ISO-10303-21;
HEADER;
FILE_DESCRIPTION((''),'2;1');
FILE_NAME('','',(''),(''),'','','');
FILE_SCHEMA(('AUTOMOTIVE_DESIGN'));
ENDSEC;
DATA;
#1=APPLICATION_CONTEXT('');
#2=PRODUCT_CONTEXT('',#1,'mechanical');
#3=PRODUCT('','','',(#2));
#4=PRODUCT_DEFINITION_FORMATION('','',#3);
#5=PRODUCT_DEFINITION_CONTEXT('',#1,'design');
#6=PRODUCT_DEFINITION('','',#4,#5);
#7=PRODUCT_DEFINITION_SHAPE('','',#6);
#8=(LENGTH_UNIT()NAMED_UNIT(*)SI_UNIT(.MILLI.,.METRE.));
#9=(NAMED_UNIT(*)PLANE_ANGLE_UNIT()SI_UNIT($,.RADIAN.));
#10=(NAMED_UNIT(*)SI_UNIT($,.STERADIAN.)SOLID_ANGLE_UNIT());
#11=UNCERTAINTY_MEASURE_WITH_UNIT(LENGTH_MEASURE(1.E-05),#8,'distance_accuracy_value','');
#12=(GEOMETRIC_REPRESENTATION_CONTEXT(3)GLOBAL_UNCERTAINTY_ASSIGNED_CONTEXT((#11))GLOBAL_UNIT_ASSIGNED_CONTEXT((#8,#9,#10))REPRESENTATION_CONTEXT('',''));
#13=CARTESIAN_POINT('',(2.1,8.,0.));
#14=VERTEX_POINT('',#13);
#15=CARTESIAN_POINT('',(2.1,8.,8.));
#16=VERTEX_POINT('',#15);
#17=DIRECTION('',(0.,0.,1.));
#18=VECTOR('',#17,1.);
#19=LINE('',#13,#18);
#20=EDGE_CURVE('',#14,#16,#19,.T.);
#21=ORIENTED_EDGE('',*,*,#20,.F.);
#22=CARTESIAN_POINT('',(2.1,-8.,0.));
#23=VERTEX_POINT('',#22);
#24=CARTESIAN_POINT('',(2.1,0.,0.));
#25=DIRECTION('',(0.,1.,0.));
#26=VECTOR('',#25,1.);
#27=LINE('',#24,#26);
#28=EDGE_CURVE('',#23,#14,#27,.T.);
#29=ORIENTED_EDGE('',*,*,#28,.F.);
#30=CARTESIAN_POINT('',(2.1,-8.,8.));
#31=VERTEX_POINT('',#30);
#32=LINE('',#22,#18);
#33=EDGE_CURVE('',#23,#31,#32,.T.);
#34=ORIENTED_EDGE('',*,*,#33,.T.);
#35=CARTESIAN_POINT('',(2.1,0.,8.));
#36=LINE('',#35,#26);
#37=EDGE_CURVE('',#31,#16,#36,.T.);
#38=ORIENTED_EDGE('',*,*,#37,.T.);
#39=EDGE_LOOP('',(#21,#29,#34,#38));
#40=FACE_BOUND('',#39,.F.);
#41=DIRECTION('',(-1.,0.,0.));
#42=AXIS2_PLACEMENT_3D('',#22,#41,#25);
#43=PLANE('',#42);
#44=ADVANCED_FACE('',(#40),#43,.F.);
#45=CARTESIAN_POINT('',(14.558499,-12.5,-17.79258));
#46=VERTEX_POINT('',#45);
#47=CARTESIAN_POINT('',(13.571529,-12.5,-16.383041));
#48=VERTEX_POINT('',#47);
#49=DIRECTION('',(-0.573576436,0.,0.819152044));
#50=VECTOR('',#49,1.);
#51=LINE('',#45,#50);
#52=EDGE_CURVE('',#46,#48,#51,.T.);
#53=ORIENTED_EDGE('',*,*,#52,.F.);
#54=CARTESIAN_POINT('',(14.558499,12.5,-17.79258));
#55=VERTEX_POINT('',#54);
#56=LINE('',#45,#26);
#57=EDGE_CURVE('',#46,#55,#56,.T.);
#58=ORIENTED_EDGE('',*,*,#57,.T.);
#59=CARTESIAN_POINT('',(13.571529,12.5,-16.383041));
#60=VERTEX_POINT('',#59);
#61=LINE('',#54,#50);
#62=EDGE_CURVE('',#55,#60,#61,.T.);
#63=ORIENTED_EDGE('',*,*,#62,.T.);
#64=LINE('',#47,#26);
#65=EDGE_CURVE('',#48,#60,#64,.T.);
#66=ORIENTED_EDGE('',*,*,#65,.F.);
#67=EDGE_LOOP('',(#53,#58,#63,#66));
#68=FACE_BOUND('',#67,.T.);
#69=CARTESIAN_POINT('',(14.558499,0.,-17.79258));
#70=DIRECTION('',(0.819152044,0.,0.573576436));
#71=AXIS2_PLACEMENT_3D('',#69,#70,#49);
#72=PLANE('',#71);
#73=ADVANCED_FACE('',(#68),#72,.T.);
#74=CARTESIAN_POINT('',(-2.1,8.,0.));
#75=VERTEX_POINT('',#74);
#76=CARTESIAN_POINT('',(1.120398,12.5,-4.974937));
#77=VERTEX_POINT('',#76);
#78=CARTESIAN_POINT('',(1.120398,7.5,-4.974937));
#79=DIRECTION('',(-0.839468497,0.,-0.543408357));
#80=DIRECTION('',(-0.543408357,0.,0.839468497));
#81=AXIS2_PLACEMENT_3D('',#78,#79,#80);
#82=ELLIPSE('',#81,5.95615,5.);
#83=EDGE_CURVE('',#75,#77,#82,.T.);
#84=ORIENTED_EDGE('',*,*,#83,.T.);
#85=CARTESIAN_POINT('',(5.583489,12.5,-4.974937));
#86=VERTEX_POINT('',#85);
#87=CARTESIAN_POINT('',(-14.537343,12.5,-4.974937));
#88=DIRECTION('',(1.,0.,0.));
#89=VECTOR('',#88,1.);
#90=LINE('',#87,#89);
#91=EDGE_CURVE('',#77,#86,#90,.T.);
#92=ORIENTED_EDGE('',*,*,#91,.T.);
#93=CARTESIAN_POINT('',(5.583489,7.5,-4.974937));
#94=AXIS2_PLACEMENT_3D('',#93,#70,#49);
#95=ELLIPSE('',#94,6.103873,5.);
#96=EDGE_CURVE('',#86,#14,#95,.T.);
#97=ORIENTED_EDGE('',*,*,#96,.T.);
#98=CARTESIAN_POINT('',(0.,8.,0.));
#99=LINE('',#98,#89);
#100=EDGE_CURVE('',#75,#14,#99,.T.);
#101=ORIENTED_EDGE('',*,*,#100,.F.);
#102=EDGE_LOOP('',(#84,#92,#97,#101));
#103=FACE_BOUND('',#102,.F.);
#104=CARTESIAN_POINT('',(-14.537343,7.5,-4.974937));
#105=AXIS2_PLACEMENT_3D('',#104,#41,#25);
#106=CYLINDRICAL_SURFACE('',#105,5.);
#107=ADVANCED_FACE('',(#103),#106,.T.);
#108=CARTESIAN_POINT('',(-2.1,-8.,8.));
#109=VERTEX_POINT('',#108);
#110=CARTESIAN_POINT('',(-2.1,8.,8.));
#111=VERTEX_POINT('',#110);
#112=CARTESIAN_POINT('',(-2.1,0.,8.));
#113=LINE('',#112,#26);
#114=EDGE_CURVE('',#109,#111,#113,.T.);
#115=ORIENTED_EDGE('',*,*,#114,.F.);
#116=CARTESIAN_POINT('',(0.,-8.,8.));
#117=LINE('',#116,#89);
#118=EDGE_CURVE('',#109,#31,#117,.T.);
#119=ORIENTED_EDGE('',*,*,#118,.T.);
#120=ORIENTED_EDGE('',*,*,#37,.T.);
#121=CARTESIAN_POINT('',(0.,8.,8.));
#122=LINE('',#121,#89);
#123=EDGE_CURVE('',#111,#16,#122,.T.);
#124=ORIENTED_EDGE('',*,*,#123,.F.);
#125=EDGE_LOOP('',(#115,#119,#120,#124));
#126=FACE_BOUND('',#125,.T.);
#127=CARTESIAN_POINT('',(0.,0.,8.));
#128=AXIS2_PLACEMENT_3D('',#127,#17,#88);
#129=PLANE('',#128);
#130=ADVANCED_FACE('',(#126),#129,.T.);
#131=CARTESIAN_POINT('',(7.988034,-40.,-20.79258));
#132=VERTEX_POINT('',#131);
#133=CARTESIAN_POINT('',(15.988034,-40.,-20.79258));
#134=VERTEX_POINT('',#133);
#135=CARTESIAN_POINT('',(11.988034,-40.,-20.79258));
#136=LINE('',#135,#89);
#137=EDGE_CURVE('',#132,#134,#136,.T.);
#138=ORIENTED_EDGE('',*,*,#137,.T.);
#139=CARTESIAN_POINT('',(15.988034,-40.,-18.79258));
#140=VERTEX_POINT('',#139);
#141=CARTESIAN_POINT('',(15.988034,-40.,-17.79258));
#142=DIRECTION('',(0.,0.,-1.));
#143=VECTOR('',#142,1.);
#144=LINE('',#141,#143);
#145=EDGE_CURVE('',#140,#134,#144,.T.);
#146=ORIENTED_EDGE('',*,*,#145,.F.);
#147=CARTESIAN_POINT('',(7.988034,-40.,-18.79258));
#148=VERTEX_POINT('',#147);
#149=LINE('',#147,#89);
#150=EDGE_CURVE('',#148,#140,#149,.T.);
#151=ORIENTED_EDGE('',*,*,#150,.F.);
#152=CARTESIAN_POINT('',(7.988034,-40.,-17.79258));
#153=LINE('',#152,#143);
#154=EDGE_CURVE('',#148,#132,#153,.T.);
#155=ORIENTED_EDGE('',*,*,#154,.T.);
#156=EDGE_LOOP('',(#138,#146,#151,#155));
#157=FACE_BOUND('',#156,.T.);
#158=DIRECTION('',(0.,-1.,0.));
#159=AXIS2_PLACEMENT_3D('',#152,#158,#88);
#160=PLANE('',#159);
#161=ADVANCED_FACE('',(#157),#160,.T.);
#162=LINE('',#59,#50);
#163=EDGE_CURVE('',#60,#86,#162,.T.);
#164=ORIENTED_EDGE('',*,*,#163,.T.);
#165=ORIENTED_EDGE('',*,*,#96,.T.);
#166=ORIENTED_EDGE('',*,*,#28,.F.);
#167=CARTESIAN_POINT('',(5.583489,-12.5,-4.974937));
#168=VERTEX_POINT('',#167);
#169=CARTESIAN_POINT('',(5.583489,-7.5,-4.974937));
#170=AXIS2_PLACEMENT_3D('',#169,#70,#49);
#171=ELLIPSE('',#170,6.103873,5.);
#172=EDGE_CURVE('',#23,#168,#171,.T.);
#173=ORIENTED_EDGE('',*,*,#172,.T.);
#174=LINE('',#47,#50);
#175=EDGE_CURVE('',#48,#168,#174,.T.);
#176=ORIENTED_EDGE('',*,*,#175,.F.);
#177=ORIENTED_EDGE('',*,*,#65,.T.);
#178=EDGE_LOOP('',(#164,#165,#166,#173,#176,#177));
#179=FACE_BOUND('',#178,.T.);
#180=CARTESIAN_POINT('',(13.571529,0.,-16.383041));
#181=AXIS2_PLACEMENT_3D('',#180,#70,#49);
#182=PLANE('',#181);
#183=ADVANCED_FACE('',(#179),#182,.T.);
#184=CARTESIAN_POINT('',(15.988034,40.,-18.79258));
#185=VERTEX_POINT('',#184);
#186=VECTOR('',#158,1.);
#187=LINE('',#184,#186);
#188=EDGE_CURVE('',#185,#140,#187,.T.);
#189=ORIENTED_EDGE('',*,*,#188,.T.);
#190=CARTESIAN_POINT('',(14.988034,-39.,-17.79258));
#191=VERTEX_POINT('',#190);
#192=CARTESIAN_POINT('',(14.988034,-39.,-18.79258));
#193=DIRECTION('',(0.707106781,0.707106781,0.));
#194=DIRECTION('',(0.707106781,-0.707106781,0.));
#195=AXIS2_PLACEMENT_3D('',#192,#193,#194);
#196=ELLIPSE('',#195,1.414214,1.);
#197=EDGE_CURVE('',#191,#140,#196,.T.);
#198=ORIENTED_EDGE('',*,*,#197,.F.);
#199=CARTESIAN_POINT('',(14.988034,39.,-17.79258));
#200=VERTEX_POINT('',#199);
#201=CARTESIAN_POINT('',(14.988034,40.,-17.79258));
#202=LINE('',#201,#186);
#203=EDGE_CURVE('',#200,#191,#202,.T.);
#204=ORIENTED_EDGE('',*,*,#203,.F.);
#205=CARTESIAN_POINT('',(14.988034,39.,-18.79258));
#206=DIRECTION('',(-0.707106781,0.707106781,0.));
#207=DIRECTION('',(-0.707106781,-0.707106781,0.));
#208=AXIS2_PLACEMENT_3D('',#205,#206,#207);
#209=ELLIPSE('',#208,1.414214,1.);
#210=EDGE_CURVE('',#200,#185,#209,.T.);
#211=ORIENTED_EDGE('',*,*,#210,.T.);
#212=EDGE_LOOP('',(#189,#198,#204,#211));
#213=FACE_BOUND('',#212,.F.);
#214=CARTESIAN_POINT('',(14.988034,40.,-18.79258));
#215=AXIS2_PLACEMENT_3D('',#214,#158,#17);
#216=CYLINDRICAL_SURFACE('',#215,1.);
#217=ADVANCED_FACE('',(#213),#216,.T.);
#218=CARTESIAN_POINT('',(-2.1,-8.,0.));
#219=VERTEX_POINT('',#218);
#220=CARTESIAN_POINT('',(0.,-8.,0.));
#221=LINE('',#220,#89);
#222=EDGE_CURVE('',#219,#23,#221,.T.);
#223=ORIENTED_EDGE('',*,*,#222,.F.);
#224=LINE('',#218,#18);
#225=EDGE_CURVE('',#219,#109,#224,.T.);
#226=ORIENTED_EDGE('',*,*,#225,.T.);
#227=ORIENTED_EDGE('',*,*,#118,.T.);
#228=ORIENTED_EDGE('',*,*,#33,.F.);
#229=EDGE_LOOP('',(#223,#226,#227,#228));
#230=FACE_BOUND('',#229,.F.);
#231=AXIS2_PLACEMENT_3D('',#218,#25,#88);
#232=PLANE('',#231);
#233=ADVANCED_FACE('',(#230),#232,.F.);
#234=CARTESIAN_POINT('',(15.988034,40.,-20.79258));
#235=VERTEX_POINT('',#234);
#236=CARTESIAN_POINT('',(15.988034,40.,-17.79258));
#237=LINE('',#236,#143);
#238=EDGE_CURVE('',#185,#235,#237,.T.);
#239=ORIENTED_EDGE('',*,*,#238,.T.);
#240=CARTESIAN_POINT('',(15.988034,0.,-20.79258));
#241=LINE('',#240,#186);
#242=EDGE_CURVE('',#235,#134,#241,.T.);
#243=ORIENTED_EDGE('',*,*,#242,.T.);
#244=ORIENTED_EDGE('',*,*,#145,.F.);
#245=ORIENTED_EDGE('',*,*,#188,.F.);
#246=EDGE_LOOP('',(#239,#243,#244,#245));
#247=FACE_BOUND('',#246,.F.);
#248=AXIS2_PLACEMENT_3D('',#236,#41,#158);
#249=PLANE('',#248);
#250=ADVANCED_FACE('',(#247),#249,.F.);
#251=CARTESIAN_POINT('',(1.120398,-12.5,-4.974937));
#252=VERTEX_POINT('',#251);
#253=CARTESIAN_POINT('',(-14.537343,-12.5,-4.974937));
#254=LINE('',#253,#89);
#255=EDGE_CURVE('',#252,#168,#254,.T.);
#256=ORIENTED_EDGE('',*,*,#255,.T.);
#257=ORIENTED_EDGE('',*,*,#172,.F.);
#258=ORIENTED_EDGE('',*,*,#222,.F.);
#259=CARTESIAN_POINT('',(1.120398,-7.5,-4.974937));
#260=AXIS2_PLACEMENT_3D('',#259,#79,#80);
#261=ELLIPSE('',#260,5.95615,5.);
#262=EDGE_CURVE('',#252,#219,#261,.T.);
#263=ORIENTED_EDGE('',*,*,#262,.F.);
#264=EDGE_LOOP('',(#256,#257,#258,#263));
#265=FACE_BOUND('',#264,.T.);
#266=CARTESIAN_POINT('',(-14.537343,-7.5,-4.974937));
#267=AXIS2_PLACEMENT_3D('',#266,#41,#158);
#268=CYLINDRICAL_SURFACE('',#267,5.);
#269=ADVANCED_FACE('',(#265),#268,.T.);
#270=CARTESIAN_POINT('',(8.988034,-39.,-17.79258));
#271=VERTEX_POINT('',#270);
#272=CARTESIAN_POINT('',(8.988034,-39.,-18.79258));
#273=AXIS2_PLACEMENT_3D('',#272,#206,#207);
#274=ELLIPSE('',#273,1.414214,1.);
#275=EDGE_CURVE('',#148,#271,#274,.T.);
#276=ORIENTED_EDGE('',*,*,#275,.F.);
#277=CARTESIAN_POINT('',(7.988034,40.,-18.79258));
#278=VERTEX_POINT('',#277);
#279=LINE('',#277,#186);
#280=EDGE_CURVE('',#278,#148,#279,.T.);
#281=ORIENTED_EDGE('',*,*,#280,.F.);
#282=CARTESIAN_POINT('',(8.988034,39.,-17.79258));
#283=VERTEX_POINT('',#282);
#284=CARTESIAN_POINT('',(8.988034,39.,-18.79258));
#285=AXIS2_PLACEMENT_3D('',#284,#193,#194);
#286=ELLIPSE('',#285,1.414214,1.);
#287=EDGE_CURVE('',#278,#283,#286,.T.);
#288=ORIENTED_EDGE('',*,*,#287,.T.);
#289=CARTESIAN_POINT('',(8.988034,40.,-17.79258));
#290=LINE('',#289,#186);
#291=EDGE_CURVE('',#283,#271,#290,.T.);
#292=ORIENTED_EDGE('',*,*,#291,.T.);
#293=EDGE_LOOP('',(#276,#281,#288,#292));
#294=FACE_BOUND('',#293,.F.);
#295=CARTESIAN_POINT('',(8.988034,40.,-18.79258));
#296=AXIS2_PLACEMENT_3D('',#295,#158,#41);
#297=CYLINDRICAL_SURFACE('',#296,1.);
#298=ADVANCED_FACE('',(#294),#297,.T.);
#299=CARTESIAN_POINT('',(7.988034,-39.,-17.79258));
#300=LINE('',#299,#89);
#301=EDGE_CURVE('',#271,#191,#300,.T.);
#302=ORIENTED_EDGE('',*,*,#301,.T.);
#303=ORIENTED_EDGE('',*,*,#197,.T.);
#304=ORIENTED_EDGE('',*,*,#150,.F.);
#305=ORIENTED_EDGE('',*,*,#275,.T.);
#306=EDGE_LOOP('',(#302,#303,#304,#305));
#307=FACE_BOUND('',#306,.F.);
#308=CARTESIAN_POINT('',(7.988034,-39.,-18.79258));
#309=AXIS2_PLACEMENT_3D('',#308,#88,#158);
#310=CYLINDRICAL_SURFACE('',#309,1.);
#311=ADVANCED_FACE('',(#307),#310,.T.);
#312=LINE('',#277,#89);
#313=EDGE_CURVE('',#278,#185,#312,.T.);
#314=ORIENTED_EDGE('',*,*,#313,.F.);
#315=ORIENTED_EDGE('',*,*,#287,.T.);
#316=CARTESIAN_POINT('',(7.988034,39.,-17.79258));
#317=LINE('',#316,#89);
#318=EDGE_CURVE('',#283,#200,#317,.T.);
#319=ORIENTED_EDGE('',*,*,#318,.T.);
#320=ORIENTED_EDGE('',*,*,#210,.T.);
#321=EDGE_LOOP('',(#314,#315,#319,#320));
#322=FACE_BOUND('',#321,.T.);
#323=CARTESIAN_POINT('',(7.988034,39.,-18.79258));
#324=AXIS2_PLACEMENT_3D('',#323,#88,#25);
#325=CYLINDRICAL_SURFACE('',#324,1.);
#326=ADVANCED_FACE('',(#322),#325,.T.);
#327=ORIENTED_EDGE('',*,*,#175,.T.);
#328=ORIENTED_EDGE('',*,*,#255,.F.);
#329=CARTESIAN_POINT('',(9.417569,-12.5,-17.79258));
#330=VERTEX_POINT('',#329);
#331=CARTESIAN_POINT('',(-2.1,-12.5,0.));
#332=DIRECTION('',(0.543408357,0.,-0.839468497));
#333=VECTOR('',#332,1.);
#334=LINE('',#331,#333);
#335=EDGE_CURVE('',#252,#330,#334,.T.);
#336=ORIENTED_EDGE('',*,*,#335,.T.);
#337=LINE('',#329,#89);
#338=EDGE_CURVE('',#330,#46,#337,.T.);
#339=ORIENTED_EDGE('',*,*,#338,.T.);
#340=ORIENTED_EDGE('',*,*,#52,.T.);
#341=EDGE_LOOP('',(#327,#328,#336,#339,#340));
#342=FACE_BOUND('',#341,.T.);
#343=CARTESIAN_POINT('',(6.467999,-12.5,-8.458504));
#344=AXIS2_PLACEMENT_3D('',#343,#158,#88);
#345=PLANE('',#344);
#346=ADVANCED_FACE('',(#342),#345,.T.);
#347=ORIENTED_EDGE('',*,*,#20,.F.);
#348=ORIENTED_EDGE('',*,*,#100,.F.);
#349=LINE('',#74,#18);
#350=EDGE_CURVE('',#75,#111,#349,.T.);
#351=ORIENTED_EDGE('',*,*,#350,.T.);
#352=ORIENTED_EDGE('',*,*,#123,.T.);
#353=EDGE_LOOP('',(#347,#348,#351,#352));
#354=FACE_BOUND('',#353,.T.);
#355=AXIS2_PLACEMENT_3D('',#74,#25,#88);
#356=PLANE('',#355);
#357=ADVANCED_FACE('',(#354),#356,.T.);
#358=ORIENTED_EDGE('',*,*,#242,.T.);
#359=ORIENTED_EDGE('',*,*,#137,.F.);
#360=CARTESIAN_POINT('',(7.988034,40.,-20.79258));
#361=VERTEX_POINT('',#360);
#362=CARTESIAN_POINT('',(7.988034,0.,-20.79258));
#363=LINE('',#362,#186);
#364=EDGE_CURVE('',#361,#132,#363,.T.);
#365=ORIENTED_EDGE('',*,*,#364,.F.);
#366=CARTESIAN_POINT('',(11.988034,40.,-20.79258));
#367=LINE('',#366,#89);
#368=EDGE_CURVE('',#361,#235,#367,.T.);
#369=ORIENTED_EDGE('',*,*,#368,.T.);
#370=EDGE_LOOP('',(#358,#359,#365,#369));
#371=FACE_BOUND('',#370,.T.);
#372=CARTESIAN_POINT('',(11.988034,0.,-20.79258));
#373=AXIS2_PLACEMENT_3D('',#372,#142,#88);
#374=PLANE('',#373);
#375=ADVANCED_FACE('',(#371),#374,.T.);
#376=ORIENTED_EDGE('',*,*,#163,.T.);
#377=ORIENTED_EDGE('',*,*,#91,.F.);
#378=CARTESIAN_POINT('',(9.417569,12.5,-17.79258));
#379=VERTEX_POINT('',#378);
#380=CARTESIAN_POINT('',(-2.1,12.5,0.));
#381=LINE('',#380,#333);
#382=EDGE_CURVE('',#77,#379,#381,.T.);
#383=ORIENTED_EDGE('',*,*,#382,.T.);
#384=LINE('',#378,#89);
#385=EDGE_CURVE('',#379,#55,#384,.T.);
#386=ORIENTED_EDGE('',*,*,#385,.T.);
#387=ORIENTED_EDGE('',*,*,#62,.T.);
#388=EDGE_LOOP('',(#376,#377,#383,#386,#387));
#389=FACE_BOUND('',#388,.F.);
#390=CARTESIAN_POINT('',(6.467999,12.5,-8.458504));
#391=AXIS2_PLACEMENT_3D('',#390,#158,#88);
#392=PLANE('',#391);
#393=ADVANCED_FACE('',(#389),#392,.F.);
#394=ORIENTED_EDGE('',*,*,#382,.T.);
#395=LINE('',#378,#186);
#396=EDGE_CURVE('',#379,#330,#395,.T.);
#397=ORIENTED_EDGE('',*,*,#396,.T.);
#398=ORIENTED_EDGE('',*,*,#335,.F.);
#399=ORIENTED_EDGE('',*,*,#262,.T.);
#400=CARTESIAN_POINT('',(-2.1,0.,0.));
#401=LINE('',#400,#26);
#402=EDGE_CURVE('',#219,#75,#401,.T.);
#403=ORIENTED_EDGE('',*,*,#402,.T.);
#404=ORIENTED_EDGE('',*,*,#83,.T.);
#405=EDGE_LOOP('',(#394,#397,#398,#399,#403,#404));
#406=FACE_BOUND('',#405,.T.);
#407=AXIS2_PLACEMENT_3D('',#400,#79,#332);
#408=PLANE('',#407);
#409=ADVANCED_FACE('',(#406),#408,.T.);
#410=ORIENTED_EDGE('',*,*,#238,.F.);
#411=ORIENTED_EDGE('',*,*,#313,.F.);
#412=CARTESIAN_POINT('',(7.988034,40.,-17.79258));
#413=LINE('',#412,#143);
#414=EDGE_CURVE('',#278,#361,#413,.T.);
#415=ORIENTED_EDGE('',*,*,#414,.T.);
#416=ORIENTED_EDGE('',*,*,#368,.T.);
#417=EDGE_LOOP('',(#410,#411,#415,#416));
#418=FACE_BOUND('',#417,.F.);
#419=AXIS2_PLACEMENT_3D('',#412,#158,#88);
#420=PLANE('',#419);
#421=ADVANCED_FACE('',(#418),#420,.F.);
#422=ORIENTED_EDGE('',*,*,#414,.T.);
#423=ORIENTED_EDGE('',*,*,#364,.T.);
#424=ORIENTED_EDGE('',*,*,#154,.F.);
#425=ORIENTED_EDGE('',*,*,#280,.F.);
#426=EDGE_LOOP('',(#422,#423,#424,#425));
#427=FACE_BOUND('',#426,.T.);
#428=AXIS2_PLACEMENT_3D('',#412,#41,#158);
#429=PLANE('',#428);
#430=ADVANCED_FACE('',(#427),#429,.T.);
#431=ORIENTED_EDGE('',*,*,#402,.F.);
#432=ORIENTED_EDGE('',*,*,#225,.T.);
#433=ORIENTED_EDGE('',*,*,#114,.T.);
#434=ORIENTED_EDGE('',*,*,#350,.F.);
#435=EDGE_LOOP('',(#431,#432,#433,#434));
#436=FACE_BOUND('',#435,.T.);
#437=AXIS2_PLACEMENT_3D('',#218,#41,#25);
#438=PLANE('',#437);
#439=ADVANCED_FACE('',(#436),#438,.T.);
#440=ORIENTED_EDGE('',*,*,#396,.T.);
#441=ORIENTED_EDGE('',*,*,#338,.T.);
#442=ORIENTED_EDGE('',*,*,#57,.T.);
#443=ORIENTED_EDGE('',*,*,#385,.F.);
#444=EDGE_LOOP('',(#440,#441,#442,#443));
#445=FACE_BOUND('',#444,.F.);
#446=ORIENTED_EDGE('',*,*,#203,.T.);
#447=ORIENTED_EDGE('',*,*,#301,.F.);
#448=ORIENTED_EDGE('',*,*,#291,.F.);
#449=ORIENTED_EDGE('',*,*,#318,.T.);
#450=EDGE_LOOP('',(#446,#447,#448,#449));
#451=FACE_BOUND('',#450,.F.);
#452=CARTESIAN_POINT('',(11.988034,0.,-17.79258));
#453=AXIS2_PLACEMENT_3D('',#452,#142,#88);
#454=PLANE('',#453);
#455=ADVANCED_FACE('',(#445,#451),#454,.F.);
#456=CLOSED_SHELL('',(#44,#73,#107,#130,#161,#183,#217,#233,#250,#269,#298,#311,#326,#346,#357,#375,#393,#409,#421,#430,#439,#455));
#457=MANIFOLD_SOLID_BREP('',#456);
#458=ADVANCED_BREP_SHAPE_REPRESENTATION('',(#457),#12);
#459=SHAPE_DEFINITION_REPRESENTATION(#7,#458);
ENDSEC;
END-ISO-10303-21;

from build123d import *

# Parameters (mm, degrees)
F0_W        = 4.2
F0_H        = 16
F1_DEPTH    = 8
F4_DEPTH    = 12.5
F5_W        = 8
F5_H        = 80
F6_DEPTH    = 3
F7_R        = 1
F8_T1_DEPTH = 29.0746859277


# Not quite as in the source:
# - a fillet or chamfer that OpenCascade refuses, or shapes differently, is made with other operations: its cross-section is extruded or revolved along the edge and cut away or added


with BuildPart() as f1:
    # F0 (on Top) → F1 (new body)
    with BuildSketch(Plane.XY):
        Rectangle(F0_W, F0_H)
    extrude(amount=F1_DEPTH)

    # F3 (on face) → F4 (join, symmetric)
    with BuildSketch(Plane.XZ):
        Polygon((13.571528727, -16.3830408858), (2.1, 0), (-0.9, 0), (11.558498512, -17.792579817), align=None)
        Polygon((14.558498512, -17.792579817), (13.571528727, -16.3830408858), (11.558498512, -17.792579817), align=None)
        Polygon((11.558498512, -17.792579817), (-0.9, 0), (-2.1, 0), (9.4175692648, -17.792579817), align=None)
    extrude(amount=F4_DEPTH, both=True)

    # F5 (on face) → F6 (join)
    with BuildSketch(Plane(origin=(0, 0, -17.792579817), x_dir=(1, 0, 0), z_dir=(0, 0, -1))):
        with Locations((11.9880338884, 0)):
            Rectangle(F5_W, F5_H)
    extrude(amount=F6_DEPTH)

    # F7
    f7_edges = [f1.edges().sort_by_distance(p)[0] for p in [
        (15.988034, 0, -17.79258),
        (11.988034, 40, -17.79258),
        (7.988034, 0, -17.79258),
        (11.988034, -40, -17.79258),
    ]]
    fillet(f7_edges, radius=F7_R)

    # F8: fillet of radius 5 on 2 edges, made by hand

    # F8_s2 → F8_t1 (cut)
    with BuildSketch(Plane.YZ.offset(-14.5373429638)):
        with BuildLine():
            ThreePointArc((-12.5, -4.9749371855), (-11.2080992435, -1.6208352193), (-8, 0))
            Line((-8, 0), (-12.5, 0))
            Line((-12.5, 0), (-12.5, -4.9749371855))
        make_face()
        with BuildLine():
            ThreePointArc((12.5, -4.9749371855), (11.2080992435, -1.6208352193), (8, 0))
            Line((8, 0), (12.5, 0))
            Line((12.5, 0), (12.5, -4.9749371855))
        make_face()
    extrude(amount=F8_T1_DEPTH, mode=Mode.SUBTRACT)


solid = f1.part
